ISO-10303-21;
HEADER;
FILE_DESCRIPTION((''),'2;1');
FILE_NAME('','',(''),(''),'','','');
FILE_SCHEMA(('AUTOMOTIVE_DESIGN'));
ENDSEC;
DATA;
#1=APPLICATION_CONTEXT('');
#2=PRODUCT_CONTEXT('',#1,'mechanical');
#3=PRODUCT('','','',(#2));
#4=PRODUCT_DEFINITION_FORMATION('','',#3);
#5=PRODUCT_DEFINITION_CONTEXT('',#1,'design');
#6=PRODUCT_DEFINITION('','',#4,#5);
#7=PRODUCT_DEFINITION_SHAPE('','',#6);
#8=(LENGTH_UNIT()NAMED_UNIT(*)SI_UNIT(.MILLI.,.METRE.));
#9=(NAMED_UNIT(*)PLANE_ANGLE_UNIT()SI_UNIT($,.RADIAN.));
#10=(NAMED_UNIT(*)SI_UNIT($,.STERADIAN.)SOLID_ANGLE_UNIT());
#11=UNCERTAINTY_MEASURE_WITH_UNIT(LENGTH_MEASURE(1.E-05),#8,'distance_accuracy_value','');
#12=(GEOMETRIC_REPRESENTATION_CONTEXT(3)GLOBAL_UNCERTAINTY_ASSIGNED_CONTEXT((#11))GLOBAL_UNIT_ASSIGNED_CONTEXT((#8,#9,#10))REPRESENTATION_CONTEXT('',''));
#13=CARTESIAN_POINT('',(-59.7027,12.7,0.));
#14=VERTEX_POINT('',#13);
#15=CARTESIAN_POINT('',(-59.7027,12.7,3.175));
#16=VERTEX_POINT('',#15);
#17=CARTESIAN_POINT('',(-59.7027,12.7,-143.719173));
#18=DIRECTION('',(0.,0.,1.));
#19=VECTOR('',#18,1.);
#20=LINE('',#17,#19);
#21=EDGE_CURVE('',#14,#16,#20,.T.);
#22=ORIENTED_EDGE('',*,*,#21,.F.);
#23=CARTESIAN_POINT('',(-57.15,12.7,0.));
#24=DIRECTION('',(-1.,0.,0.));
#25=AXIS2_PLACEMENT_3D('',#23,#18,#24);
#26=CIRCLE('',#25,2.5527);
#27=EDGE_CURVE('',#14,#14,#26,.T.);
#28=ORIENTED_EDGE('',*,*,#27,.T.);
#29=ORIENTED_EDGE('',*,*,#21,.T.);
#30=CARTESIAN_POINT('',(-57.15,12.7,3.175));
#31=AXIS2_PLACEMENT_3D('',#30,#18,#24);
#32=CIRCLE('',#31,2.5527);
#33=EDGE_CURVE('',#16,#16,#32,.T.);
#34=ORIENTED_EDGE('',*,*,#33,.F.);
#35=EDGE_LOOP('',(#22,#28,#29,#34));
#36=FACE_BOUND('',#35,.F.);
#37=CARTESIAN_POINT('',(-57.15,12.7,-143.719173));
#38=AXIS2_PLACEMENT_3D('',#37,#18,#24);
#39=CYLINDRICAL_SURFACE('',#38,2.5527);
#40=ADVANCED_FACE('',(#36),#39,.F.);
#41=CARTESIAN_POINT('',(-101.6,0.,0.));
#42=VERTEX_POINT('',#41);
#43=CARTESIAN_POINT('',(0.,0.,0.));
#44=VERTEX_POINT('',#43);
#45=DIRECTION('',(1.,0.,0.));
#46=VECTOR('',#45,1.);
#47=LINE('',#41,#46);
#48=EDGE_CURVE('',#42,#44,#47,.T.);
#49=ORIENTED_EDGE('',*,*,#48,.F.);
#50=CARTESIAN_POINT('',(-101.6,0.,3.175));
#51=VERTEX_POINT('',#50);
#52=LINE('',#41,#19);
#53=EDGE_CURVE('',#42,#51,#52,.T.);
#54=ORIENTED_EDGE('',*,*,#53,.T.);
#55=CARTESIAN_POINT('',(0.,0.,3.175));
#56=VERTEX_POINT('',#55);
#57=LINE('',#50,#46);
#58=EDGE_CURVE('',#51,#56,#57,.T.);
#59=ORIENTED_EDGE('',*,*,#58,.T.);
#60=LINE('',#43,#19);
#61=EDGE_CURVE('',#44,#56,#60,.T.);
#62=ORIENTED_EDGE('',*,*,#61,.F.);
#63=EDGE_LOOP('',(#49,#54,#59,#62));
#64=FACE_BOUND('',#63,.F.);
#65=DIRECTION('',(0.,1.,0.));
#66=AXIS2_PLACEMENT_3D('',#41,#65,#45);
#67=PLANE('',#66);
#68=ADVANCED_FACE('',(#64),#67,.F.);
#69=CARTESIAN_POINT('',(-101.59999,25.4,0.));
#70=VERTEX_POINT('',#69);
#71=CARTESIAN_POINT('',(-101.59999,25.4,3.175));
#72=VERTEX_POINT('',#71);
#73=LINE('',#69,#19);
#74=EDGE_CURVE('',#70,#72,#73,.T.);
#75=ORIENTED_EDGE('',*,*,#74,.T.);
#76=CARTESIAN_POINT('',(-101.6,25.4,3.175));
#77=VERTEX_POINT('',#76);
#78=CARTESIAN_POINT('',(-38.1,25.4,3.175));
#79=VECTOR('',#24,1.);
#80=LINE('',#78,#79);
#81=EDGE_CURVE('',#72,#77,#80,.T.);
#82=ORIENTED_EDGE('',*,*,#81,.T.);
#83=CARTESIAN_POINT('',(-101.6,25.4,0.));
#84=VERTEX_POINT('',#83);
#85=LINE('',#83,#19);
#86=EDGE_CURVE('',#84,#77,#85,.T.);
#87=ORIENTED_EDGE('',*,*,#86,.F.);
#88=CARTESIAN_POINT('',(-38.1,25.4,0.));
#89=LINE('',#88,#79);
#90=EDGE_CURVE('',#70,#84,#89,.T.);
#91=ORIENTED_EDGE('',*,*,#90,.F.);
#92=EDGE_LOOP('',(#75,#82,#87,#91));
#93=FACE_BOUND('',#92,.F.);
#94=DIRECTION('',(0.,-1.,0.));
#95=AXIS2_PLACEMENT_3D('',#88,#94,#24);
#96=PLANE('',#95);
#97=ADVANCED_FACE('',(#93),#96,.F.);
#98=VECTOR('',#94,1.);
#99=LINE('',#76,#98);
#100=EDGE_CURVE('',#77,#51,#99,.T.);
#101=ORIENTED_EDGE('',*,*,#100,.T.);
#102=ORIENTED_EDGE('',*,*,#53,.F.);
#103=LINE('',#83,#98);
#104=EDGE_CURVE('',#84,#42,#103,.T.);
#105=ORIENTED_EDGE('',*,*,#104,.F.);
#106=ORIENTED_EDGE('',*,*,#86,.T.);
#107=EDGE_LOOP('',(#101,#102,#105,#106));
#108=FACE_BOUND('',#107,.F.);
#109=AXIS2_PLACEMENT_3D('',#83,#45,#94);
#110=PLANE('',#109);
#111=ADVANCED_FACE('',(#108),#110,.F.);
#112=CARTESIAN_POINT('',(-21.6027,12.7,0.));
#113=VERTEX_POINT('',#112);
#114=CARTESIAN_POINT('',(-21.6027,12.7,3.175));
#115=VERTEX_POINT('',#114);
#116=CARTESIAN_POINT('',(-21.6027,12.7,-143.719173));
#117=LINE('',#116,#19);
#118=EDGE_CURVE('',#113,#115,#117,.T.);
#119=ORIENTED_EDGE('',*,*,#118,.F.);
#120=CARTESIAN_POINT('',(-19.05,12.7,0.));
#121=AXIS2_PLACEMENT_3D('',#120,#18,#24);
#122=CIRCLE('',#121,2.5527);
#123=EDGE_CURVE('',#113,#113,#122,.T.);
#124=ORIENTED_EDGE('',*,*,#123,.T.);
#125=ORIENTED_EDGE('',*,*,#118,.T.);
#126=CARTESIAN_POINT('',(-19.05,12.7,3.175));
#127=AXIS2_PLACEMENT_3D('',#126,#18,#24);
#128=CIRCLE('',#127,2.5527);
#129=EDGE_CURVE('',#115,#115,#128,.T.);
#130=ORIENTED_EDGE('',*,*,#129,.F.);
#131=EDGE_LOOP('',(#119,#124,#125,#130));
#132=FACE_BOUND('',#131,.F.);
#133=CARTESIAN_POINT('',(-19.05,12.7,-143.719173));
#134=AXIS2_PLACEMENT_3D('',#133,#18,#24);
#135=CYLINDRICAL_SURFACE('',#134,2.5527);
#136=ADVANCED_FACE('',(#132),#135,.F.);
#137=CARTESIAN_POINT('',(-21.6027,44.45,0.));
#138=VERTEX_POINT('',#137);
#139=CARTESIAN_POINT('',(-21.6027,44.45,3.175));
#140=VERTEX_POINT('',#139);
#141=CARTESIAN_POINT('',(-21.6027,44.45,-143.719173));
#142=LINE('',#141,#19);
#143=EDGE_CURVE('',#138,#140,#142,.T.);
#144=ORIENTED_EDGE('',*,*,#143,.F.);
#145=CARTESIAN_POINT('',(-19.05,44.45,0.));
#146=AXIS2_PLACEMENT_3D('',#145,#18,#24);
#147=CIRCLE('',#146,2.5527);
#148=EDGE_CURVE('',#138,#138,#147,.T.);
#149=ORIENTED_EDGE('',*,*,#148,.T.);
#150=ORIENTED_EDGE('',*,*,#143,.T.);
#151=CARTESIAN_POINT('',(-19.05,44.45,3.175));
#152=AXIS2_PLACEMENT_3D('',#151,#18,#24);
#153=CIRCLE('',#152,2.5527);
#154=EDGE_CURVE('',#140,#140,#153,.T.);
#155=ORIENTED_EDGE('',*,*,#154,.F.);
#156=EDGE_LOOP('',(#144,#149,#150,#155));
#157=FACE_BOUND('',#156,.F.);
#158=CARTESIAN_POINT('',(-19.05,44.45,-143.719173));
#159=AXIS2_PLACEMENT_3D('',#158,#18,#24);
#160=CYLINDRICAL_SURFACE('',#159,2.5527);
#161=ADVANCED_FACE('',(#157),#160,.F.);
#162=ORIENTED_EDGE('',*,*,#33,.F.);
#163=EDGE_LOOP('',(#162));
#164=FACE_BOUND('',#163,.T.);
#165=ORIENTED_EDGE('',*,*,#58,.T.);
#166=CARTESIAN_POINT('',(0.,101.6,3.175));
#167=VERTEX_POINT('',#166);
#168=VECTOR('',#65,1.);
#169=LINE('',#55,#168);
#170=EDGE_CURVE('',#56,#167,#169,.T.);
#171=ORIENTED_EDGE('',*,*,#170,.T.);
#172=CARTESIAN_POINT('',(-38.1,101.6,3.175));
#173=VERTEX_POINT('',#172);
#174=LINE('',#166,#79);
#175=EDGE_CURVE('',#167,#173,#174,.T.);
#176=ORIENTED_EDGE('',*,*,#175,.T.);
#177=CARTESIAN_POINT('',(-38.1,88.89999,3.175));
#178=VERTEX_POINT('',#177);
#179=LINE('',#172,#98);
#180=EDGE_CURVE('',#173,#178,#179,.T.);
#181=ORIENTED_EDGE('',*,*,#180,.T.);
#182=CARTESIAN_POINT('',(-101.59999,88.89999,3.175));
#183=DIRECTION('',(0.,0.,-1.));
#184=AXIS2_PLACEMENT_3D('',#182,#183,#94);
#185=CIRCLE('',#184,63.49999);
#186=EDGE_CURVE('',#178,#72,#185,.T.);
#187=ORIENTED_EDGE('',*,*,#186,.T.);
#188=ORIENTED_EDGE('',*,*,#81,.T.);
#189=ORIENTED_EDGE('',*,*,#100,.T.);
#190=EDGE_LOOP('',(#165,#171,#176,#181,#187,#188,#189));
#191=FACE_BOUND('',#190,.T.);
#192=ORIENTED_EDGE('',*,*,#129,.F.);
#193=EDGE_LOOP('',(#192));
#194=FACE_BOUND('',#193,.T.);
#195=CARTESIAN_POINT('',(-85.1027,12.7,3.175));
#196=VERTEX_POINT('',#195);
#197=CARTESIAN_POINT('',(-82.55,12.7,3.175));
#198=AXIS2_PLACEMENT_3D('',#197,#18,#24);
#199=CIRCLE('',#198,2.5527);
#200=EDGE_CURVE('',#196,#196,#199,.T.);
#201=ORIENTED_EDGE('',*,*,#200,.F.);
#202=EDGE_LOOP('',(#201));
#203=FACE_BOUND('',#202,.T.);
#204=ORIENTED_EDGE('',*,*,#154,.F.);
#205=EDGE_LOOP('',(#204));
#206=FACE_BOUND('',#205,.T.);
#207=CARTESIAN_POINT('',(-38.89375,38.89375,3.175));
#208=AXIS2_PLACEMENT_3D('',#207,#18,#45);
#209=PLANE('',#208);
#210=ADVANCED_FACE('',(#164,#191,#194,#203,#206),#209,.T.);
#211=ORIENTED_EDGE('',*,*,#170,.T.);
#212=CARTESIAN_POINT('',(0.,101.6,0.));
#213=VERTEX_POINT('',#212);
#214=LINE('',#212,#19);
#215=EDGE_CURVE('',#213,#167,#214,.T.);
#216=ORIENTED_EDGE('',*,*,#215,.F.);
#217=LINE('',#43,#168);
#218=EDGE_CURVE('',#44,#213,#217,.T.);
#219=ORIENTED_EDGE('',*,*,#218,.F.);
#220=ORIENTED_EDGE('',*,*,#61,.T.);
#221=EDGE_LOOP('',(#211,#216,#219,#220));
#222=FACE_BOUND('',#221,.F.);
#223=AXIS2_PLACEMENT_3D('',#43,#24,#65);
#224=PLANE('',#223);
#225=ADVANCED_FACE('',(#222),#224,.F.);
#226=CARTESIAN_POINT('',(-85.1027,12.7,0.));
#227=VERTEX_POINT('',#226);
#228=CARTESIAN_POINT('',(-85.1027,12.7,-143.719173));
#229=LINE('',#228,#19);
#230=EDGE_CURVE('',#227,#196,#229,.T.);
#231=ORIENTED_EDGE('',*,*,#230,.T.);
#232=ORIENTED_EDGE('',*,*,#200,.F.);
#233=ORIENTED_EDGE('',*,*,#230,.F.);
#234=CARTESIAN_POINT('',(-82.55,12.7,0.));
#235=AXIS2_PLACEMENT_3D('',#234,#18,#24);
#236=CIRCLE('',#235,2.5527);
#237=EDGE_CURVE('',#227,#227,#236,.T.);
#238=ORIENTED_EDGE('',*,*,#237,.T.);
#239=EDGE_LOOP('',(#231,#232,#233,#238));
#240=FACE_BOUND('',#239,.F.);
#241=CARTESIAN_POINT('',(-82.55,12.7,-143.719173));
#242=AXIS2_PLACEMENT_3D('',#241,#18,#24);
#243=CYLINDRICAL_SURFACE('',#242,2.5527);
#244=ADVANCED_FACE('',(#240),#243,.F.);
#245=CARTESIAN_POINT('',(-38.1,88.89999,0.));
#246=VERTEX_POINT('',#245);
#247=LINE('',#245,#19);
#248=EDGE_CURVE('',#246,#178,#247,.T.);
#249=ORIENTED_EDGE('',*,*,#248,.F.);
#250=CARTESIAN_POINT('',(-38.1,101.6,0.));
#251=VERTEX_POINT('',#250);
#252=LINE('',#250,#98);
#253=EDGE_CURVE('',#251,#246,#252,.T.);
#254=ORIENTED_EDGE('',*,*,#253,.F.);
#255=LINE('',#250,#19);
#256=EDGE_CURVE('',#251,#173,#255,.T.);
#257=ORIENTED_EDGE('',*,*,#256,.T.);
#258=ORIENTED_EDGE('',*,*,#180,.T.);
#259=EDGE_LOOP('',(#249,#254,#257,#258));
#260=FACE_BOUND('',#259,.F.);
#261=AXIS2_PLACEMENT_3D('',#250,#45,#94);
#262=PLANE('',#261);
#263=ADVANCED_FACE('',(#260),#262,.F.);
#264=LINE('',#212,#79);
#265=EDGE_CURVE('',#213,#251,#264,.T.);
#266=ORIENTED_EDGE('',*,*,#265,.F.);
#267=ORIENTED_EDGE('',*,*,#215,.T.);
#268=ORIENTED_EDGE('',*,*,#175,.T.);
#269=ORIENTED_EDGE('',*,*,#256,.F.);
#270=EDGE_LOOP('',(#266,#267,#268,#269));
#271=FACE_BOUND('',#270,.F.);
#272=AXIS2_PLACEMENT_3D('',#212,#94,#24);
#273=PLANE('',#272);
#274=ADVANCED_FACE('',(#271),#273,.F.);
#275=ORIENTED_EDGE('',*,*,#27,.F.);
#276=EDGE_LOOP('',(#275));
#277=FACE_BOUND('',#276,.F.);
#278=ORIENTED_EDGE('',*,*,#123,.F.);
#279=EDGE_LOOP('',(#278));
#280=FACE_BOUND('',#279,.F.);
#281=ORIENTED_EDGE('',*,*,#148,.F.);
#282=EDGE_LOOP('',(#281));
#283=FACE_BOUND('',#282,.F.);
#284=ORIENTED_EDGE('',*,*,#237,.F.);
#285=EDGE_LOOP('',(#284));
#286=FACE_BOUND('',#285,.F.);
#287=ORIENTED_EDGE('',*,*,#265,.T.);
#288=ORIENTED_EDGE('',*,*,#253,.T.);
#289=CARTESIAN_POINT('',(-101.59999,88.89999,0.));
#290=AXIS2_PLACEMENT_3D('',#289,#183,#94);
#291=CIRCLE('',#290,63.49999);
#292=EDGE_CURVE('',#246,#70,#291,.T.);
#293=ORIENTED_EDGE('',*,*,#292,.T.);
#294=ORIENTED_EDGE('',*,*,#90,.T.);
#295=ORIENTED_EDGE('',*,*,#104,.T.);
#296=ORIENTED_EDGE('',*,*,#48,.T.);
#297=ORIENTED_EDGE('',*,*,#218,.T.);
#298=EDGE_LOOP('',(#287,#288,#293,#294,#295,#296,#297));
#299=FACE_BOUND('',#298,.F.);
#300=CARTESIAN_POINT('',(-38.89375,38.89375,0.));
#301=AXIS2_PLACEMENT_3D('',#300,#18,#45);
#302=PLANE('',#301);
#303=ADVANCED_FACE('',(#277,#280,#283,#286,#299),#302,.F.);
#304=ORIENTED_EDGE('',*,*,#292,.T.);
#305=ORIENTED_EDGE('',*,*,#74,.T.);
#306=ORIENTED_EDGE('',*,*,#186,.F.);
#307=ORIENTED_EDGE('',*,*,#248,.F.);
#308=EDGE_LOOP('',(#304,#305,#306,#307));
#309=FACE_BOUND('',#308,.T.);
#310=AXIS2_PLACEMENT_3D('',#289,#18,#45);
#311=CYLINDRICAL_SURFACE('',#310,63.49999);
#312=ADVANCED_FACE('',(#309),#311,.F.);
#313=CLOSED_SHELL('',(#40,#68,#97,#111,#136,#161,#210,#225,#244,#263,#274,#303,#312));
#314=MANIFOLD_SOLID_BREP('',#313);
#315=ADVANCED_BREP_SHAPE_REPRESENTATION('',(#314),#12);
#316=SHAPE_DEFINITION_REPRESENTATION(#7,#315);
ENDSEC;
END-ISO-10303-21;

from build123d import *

# Parameters (mm, degrees)
F1_DEPTH = 3.175
F2_R     = 63.49999
F3_D     = 5.1054


# Not quite as in the source:
# - a fillet or chamfer is up to 0.001 mm smaller than in the source, because OpenCascade refuses the exact size


with BuildPart() as f1:
    # F0 (on Top) → F1 (new body)
    with BuildSketch(Plane.XY):
        Polygon((-101.6, 0), (0, 0), (0, 101.6), (-38.1, 101.6), (-38.1, 25.4), (-101.6, 25.4), align=None)
    extrude(amount=F1_DEPTH)

    # F2 (radius 63.5 in the source; OpenCascade refuses exactly that, so slightly less here)
    f2_edges = [f1.edges().sort_by_distance(p)[0] for p in [
        (-38.1, 25.4, 1.5875),
    ]]
    fillet(f2_edges, radius=F2_R)

    # F3 (through all)
    with Locations(Plane(origin=(0, 0, 0), x_dir=(1, 0, 0), z_dir=(0, 0, -1))):
        with Locations((-82.55, -12.7), (-57.15, -12.7), (-19.05, -12.7), (-19.05, -44.45)):
            Hole(F3_D / 2)


solid = f1.part
